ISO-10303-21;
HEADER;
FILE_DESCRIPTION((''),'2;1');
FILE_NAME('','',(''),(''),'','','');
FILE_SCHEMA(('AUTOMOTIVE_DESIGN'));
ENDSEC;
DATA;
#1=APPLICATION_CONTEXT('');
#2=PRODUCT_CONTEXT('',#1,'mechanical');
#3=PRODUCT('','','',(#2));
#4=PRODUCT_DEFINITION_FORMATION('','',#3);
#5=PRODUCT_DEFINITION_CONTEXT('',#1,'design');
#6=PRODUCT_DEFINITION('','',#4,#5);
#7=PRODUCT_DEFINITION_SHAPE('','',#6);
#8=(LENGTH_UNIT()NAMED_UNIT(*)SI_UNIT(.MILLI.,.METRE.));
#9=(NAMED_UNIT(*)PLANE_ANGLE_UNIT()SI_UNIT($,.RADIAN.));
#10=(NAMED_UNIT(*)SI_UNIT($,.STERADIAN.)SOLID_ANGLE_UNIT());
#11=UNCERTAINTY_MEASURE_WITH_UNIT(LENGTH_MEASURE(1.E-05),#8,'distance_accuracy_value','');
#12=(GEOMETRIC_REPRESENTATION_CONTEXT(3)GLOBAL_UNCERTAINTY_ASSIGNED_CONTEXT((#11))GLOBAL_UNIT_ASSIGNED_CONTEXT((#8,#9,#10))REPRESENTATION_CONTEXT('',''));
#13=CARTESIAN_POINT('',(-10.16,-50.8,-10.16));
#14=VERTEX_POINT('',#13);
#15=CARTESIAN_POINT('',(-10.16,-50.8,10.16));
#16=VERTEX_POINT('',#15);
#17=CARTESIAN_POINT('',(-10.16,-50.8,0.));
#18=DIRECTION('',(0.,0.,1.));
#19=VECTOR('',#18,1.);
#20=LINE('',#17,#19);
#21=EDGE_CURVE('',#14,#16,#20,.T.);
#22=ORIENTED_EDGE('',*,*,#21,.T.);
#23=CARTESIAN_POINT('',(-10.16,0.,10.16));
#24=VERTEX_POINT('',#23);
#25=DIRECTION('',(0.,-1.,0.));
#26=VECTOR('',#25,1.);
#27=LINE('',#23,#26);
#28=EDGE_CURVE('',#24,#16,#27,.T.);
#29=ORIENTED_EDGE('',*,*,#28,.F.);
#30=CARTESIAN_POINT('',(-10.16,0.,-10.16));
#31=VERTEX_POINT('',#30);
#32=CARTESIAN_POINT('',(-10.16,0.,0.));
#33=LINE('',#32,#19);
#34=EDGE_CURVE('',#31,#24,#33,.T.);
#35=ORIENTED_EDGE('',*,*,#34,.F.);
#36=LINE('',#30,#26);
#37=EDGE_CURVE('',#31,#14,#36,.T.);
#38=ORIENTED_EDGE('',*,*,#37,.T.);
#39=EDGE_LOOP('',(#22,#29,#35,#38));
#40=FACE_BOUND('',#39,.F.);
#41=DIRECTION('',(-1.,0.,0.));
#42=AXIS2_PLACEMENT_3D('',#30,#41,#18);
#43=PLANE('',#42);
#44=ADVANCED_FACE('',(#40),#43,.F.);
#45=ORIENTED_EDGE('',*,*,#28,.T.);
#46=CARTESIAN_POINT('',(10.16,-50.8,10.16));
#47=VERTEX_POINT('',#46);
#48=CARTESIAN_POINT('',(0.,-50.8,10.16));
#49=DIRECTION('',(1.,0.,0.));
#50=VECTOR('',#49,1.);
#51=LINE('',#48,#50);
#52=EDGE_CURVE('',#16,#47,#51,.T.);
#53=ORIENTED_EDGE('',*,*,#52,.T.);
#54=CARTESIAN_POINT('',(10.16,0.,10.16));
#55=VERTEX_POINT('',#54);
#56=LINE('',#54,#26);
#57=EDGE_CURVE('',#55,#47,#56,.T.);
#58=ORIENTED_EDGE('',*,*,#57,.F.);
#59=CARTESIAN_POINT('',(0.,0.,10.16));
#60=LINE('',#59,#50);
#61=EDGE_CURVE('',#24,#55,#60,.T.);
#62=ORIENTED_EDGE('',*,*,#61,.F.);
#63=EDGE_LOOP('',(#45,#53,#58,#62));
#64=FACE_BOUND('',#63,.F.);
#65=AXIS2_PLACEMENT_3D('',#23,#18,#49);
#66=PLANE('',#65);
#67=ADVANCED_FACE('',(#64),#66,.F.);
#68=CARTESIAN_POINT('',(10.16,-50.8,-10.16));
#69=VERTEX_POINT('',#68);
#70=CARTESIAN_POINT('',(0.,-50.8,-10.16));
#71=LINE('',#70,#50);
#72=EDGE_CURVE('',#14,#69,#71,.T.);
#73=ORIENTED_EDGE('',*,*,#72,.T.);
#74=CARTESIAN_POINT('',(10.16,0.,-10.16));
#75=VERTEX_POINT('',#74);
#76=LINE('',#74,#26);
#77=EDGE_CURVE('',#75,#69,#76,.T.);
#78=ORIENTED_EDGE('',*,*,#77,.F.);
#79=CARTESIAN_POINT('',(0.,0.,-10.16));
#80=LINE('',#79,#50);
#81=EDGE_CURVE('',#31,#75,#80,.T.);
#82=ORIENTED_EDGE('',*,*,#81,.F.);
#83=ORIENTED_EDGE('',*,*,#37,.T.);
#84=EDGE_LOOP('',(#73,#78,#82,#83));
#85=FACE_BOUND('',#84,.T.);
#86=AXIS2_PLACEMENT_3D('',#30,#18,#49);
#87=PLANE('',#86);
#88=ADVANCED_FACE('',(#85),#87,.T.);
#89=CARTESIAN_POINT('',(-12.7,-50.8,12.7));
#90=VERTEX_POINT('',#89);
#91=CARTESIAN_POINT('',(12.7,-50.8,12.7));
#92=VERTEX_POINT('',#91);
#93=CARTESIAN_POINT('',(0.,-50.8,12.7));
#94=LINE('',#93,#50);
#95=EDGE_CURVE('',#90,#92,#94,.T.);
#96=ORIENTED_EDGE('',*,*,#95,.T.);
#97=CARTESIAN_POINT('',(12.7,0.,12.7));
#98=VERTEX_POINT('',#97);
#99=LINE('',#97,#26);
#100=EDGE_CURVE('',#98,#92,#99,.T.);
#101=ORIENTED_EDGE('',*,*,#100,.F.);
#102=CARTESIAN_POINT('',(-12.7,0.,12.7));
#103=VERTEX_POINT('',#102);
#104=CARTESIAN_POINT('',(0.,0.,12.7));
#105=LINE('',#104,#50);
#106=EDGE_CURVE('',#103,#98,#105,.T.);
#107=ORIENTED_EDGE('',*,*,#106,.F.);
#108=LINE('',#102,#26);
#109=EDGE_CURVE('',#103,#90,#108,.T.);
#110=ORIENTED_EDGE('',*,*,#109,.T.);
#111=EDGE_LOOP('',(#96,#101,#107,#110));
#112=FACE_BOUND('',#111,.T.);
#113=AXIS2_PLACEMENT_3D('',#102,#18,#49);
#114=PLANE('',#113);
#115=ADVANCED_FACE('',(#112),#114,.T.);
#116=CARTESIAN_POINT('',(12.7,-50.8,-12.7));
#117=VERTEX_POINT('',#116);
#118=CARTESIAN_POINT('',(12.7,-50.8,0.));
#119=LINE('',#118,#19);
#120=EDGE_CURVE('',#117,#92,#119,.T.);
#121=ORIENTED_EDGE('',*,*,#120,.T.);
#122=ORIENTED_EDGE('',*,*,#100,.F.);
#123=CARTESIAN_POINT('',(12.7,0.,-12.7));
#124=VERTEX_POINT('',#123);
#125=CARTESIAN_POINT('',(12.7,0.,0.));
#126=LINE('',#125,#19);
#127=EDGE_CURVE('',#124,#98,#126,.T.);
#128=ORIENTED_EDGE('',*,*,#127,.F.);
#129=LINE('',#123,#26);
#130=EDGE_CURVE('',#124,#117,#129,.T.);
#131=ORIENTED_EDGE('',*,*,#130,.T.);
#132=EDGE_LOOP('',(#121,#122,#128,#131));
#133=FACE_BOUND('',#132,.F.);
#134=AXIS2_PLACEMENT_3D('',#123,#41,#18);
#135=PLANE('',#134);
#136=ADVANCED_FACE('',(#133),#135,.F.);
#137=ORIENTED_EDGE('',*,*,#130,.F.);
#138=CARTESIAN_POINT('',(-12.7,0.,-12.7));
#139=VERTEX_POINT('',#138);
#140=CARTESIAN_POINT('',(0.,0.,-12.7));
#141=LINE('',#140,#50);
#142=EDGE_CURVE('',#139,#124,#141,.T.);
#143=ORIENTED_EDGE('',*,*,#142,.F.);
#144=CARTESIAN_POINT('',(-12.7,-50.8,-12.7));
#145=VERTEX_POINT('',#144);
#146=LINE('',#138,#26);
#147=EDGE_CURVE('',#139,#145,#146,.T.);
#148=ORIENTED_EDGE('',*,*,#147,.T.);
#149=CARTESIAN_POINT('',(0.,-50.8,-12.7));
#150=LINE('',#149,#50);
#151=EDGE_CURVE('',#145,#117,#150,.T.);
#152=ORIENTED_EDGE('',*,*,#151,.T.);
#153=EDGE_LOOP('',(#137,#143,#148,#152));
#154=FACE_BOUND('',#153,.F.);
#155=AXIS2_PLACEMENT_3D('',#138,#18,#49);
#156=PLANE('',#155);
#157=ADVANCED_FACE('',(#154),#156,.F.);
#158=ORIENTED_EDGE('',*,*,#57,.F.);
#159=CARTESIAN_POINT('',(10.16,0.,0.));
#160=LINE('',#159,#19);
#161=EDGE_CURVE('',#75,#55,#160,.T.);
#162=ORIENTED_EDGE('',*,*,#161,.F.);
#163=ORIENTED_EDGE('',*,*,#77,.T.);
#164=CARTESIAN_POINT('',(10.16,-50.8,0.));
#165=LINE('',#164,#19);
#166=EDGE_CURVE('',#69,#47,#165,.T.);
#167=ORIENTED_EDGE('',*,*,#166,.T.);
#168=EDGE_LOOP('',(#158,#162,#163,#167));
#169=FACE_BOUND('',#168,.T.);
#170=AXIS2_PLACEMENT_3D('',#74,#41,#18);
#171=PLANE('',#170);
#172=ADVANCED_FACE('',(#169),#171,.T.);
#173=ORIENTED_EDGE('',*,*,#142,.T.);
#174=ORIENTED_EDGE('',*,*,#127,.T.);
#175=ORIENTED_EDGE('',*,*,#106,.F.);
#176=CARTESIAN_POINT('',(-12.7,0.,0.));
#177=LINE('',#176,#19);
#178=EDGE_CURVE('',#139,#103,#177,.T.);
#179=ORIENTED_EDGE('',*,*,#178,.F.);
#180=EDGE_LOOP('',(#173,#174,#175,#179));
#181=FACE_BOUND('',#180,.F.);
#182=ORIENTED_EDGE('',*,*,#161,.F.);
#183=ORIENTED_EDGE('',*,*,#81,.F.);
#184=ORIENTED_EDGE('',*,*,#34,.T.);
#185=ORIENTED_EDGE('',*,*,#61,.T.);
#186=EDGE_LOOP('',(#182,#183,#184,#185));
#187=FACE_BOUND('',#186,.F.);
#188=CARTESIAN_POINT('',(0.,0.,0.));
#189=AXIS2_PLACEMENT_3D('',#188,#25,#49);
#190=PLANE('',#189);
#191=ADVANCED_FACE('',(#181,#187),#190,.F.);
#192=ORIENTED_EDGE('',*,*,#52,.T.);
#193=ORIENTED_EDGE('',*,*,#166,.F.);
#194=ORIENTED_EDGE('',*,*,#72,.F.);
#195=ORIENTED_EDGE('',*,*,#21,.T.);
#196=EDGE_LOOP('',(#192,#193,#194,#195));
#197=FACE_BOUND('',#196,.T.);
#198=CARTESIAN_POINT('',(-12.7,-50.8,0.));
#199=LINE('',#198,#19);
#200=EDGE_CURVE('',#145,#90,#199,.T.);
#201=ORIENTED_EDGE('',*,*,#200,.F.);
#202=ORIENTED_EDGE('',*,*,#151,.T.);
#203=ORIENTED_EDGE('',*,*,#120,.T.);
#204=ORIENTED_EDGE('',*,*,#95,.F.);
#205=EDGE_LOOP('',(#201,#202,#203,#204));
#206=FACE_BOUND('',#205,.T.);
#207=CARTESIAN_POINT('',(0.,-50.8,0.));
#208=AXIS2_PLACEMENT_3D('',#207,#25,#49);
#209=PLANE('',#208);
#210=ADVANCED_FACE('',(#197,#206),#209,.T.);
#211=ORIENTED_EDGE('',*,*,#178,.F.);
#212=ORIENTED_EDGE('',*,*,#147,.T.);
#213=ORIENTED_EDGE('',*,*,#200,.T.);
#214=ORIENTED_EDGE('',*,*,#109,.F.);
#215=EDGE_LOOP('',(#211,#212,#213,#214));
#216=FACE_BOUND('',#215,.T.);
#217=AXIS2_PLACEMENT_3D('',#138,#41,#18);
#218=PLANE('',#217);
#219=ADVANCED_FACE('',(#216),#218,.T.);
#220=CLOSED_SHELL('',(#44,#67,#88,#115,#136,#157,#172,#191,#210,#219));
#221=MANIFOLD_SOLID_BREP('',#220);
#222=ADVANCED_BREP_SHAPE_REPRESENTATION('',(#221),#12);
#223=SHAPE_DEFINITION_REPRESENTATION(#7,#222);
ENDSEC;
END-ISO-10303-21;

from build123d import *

# Parameters (mm, degrees)
F0_W     = 25.4
F0_H     = 25.4
F0_W_2   = 20.32
F0_H_2   = 20.32
F2_DEPTH = 50.8


# Not quite as in the source:
# - the program builds the solid bodies; features that only make, move or delete a surface that nothing else refers to are left out


with BuildPart() as f2:
    # F0 (on Front) → F2 (new body)
    with BuildSketch(Plane.XZ):
        Rectangle(F0_W, F0_H)
        Rectangle(F0_W_2, F0_H_2, mode=Mode.SUBTRACT)
    extrude(amount=F2_DEPTH)


solid = f2.part
